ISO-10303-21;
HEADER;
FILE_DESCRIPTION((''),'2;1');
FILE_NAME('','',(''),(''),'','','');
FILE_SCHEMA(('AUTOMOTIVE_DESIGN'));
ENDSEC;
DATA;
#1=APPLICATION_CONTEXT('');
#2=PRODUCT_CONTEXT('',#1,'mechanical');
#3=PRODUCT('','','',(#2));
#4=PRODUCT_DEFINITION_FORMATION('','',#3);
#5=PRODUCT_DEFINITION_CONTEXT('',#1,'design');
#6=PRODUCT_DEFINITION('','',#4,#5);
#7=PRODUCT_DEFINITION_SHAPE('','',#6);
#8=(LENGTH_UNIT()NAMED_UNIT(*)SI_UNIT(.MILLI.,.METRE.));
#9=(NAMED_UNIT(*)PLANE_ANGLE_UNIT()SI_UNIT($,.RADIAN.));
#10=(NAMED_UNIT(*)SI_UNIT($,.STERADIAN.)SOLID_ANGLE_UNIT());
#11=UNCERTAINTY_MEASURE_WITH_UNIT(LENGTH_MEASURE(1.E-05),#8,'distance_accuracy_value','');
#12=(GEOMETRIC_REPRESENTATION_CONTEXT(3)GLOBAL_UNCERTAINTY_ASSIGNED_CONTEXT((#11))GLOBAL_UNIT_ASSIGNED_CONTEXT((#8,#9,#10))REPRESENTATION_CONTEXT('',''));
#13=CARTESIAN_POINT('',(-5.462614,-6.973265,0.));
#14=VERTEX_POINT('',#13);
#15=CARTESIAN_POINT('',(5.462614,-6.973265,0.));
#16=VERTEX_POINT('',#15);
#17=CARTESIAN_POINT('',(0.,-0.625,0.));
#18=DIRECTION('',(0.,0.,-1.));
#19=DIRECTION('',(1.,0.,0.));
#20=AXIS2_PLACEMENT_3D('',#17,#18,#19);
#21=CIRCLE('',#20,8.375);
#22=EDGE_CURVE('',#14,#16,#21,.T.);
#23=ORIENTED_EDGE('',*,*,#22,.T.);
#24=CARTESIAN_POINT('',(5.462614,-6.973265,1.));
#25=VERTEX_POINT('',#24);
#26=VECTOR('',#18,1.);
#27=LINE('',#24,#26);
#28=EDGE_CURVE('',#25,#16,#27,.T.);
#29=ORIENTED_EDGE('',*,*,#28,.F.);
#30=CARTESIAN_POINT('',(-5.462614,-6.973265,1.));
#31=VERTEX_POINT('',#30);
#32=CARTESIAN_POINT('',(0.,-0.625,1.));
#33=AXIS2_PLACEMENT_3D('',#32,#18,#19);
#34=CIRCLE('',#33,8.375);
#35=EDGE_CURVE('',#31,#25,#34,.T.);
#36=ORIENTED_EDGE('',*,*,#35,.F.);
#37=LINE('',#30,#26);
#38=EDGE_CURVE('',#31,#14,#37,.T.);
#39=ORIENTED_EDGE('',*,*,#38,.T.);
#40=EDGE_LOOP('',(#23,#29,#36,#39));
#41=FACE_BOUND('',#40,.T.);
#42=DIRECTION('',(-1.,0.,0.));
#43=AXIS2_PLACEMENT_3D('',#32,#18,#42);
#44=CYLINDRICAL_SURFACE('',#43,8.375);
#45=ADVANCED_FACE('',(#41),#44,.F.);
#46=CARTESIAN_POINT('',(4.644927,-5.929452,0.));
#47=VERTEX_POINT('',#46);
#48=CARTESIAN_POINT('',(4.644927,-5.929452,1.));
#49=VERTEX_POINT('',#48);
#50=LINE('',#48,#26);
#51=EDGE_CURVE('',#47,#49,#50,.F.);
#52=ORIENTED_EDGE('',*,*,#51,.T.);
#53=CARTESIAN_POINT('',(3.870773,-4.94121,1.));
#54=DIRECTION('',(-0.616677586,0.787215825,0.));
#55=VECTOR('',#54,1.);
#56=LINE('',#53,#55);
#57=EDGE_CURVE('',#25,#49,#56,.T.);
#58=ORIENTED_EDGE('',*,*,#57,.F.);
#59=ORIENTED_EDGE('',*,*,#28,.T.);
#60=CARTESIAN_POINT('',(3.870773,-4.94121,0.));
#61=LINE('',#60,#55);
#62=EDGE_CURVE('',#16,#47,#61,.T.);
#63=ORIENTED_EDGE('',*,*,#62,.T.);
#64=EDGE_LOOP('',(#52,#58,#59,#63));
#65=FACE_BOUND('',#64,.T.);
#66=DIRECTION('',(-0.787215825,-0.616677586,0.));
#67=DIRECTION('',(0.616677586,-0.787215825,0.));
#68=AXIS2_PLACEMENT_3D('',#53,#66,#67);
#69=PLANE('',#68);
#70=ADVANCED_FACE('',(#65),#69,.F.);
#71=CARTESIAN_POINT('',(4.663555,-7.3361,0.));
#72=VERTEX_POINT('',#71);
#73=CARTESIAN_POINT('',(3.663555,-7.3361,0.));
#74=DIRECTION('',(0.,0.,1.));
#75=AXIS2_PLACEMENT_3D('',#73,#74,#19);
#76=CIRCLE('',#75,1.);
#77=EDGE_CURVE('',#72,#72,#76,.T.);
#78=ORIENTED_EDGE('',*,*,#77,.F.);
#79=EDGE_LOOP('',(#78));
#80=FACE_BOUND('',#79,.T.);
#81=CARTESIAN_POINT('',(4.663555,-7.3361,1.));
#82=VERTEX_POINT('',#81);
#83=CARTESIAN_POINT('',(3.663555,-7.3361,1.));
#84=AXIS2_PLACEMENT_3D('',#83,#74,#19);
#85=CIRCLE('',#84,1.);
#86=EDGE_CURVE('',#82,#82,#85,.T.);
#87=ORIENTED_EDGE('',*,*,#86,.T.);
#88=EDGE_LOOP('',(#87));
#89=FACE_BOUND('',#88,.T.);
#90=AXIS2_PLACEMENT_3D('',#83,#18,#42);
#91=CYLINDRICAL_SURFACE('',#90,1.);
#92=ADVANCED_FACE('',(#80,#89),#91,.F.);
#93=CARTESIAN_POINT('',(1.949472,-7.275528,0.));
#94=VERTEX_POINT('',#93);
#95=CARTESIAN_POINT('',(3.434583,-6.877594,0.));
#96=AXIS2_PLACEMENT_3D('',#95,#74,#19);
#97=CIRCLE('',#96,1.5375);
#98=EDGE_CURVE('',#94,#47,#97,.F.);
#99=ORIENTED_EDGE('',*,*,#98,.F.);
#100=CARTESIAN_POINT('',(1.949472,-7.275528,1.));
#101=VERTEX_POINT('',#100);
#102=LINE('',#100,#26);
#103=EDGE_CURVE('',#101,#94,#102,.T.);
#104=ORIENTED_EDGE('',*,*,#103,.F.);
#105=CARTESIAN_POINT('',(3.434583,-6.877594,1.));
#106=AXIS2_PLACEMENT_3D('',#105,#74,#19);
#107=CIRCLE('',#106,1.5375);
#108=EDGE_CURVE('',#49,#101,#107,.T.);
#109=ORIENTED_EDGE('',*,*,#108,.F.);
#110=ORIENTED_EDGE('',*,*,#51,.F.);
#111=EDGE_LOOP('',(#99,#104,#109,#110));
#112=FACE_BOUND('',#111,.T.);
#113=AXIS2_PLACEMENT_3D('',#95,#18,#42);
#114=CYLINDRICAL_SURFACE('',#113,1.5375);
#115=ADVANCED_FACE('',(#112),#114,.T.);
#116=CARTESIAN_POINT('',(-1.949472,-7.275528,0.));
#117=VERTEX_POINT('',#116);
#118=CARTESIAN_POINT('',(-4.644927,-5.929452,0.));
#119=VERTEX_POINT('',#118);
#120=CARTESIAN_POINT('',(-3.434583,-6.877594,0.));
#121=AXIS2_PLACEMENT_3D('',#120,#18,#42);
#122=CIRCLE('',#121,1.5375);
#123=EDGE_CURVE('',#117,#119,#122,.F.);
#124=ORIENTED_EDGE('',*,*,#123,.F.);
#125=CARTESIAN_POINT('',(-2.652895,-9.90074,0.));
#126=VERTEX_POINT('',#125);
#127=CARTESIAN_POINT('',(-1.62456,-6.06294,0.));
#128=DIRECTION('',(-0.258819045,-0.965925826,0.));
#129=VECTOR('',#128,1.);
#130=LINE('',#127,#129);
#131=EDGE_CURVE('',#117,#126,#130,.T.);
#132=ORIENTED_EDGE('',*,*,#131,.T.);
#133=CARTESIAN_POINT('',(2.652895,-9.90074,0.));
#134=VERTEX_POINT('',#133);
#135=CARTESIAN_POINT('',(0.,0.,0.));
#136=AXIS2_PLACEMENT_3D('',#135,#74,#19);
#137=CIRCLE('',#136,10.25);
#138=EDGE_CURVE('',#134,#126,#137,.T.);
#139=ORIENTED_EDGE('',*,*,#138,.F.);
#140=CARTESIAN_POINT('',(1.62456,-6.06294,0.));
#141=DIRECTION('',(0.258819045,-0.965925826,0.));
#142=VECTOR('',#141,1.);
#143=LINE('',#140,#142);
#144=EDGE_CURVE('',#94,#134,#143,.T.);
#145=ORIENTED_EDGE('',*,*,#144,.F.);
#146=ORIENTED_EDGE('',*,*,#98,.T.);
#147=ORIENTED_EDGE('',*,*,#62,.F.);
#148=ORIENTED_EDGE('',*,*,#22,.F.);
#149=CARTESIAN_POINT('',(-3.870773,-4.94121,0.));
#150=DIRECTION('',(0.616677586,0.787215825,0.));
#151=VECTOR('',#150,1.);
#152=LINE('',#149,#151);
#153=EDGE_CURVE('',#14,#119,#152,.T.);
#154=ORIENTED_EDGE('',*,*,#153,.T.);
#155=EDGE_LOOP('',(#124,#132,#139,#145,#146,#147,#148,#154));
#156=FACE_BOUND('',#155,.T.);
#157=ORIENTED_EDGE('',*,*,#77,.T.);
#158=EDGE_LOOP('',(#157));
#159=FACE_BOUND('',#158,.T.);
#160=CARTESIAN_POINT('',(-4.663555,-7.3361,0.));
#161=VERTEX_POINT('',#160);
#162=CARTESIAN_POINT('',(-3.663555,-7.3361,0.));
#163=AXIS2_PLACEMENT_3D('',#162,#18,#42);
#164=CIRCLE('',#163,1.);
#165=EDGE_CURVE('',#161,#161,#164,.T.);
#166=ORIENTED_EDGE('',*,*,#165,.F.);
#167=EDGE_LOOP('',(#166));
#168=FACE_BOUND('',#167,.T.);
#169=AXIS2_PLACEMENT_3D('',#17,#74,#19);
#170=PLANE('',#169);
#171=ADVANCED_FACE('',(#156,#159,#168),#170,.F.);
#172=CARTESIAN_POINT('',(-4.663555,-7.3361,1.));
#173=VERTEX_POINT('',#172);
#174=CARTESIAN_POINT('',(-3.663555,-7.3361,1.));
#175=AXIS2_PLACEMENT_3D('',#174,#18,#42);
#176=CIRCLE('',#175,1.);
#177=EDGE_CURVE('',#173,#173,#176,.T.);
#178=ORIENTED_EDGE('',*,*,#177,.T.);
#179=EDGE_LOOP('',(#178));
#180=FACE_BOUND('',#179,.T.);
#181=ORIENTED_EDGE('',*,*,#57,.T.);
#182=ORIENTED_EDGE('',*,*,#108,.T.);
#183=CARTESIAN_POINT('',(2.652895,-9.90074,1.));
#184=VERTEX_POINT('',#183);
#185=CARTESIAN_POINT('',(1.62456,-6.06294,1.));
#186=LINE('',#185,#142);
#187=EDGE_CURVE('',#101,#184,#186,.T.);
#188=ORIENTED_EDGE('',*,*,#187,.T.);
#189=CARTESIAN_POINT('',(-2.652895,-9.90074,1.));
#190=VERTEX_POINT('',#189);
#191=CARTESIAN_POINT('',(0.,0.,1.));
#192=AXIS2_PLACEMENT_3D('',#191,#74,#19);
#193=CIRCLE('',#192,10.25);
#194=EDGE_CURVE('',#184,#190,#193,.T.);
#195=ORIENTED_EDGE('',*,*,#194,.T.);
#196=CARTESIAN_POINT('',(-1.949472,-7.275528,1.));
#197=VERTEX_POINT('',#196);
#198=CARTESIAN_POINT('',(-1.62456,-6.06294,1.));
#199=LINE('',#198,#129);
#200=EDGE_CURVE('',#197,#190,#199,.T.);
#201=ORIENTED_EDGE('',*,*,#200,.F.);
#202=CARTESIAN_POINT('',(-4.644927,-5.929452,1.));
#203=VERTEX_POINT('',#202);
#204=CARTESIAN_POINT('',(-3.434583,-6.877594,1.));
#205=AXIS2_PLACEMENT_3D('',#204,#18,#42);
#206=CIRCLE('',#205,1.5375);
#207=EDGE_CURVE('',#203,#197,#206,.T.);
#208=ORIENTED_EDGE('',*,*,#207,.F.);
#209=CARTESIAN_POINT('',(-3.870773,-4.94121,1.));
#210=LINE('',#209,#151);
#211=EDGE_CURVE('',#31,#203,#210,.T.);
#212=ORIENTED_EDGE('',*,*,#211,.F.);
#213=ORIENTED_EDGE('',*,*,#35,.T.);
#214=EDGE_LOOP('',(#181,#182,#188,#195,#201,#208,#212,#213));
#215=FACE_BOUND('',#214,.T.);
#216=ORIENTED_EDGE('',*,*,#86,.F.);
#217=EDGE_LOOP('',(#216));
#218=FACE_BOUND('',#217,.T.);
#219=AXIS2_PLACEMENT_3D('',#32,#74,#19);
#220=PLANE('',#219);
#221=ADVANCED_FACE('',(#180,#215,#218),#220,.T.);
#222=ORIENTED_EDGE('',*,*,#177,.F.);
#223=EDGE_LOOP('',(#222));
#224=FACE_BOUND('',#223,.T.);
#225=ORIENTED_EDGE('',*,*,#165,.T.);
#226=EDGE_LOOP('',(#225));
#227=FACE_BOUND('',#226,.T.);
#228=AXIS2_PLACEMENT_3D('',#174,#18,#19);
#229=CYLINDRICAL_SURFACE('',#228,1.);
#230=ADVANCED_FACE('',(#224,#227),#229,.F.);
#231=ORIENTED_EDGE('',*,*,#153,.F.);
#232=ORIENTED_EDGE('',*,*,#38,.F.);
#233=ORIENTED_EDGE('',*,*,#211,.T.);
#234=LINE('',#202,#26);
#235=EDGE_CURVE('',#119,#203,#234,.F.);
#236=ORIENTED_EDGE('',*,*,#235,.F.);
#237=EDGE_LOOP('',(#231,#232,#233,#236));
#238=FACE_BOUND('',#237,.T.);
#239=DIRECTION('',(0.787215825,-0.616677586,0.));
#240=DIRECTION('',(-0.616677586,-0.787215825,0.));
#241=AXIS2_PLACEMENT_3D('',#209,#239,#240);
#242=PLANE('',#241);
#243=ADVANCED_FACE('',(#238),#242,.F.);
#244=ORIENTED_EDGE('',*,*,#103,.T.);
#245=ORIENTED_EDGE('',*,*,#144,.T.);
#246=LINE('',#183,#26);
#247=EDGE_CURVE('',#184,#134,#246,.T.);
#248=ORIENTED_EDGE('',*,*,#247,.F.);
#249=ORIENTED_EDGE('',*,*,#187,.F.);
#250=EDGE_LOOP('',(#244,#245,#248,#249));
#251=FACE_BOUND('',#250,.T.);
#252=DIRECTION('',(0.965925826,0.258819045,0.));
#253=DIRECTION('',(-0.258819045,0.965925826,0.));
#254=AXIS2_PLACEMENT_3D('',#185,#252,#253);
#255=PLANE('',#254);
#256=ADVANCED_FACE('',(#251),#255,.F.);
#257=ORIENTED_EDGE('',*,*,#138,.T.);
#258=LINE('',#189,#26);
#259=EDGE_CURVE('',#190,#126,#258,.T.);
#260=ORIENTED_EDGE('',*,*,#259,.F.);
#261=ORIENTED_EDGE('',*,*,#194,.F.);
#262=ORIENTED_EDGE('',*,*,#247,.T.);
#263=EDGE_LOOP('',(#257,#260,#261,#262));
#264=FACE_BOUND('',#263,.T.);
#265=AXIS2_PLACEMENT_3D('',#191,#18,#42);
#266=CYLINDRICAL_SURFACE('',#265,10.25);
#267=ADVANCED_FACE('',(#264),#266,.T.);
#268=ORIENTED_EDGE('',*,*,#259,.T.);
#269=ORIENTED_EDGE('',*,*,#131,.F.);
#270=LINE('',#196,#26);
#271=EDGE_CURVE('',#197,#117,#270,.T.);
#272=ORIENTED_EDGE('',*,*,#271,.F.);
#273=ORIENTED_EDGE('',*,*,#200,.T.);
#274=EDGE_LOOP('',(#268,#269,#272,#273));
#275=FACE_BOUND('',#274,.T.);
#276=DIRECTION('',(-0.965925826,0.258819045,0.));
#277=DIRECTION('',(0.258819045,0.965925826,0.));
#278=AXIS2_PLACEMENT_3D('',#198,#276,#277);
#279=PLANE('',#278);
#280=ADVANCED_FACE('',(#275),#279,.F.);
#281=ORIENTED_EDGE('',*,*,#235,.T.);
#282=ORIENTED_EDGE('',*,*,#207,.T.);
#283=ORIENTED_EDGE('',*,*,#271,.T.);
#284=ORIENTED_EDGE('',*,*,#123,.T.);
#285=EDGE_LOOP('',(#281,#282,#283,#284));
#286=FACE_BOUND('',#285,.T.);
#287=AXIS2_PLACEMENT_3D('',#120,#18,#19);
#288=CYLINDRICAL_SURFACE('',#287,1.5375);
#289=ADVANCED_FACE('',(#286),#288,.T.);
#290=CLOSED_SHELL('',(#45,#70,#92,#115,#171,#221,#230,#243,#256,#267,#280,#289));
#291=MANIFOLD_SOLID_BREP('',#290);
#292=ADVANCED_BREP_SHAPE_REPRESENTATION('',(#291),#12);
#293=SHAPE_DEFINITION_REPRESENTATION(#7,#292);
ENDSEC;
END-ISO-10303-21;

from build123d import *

# Parameters (mm, degrees)
SKETCH2_R           = 1
BOSS_EXTRUDE1_DEPTH = 1
FILLET1_R           = 1.5375


with BuildPart() as part:
    # Sketch2 → Boss-Extrude1 (new body)
    with BuildSketch(Plane.XY):
        with BuildLine():
            Line((3.870772643, -4.941210038), (5.462614208, -6.973265197))
            ThreePointArc((5.462614208, -6.973265197), (7.851985291, 2.288237372), (0, 7.75))
            Line((0, 7.75), (0, 10.25))
            ThreePointArc((0, 10.25), (10.162309829, 1.33789347), (2.652895212, -9.900739719))
            Line((2.652895212, -9.900739719), (1.624559903, -6.062940097))
            Line((1.624559903, -6.062940097), (3.870772643, -4.941210038))
        make_face()
        with Locations((3.663555031, -7.33610009)):
            Circle(SKETCH2_R, mode=Mode.SUBTRACT)
    extrude(amount=BOSS_EXTRUDE1_DEPTH)

    # Fillet1
    fillet1_edges = [part.edges().sort_by_distance(p)[0] for p in [
        (3.870772643, -4.941210038, 0.5),
        (1.624559903, -6.062940097, 0.5),
    ]]
    fillet(fillet1_edges, radius=FILLET1_R - 0.0001)  # a hair under: the kernel refuses the full size

    # Mirror1: part across plane


with BuildPart() as part_1:
    add(part.part)
    add(part.part.mirror(Plane(origin=(0, 10.25, 1), x_dir=(0, 0, 1), z_dir=(1, 0, 0))))


solid = part_1.part
